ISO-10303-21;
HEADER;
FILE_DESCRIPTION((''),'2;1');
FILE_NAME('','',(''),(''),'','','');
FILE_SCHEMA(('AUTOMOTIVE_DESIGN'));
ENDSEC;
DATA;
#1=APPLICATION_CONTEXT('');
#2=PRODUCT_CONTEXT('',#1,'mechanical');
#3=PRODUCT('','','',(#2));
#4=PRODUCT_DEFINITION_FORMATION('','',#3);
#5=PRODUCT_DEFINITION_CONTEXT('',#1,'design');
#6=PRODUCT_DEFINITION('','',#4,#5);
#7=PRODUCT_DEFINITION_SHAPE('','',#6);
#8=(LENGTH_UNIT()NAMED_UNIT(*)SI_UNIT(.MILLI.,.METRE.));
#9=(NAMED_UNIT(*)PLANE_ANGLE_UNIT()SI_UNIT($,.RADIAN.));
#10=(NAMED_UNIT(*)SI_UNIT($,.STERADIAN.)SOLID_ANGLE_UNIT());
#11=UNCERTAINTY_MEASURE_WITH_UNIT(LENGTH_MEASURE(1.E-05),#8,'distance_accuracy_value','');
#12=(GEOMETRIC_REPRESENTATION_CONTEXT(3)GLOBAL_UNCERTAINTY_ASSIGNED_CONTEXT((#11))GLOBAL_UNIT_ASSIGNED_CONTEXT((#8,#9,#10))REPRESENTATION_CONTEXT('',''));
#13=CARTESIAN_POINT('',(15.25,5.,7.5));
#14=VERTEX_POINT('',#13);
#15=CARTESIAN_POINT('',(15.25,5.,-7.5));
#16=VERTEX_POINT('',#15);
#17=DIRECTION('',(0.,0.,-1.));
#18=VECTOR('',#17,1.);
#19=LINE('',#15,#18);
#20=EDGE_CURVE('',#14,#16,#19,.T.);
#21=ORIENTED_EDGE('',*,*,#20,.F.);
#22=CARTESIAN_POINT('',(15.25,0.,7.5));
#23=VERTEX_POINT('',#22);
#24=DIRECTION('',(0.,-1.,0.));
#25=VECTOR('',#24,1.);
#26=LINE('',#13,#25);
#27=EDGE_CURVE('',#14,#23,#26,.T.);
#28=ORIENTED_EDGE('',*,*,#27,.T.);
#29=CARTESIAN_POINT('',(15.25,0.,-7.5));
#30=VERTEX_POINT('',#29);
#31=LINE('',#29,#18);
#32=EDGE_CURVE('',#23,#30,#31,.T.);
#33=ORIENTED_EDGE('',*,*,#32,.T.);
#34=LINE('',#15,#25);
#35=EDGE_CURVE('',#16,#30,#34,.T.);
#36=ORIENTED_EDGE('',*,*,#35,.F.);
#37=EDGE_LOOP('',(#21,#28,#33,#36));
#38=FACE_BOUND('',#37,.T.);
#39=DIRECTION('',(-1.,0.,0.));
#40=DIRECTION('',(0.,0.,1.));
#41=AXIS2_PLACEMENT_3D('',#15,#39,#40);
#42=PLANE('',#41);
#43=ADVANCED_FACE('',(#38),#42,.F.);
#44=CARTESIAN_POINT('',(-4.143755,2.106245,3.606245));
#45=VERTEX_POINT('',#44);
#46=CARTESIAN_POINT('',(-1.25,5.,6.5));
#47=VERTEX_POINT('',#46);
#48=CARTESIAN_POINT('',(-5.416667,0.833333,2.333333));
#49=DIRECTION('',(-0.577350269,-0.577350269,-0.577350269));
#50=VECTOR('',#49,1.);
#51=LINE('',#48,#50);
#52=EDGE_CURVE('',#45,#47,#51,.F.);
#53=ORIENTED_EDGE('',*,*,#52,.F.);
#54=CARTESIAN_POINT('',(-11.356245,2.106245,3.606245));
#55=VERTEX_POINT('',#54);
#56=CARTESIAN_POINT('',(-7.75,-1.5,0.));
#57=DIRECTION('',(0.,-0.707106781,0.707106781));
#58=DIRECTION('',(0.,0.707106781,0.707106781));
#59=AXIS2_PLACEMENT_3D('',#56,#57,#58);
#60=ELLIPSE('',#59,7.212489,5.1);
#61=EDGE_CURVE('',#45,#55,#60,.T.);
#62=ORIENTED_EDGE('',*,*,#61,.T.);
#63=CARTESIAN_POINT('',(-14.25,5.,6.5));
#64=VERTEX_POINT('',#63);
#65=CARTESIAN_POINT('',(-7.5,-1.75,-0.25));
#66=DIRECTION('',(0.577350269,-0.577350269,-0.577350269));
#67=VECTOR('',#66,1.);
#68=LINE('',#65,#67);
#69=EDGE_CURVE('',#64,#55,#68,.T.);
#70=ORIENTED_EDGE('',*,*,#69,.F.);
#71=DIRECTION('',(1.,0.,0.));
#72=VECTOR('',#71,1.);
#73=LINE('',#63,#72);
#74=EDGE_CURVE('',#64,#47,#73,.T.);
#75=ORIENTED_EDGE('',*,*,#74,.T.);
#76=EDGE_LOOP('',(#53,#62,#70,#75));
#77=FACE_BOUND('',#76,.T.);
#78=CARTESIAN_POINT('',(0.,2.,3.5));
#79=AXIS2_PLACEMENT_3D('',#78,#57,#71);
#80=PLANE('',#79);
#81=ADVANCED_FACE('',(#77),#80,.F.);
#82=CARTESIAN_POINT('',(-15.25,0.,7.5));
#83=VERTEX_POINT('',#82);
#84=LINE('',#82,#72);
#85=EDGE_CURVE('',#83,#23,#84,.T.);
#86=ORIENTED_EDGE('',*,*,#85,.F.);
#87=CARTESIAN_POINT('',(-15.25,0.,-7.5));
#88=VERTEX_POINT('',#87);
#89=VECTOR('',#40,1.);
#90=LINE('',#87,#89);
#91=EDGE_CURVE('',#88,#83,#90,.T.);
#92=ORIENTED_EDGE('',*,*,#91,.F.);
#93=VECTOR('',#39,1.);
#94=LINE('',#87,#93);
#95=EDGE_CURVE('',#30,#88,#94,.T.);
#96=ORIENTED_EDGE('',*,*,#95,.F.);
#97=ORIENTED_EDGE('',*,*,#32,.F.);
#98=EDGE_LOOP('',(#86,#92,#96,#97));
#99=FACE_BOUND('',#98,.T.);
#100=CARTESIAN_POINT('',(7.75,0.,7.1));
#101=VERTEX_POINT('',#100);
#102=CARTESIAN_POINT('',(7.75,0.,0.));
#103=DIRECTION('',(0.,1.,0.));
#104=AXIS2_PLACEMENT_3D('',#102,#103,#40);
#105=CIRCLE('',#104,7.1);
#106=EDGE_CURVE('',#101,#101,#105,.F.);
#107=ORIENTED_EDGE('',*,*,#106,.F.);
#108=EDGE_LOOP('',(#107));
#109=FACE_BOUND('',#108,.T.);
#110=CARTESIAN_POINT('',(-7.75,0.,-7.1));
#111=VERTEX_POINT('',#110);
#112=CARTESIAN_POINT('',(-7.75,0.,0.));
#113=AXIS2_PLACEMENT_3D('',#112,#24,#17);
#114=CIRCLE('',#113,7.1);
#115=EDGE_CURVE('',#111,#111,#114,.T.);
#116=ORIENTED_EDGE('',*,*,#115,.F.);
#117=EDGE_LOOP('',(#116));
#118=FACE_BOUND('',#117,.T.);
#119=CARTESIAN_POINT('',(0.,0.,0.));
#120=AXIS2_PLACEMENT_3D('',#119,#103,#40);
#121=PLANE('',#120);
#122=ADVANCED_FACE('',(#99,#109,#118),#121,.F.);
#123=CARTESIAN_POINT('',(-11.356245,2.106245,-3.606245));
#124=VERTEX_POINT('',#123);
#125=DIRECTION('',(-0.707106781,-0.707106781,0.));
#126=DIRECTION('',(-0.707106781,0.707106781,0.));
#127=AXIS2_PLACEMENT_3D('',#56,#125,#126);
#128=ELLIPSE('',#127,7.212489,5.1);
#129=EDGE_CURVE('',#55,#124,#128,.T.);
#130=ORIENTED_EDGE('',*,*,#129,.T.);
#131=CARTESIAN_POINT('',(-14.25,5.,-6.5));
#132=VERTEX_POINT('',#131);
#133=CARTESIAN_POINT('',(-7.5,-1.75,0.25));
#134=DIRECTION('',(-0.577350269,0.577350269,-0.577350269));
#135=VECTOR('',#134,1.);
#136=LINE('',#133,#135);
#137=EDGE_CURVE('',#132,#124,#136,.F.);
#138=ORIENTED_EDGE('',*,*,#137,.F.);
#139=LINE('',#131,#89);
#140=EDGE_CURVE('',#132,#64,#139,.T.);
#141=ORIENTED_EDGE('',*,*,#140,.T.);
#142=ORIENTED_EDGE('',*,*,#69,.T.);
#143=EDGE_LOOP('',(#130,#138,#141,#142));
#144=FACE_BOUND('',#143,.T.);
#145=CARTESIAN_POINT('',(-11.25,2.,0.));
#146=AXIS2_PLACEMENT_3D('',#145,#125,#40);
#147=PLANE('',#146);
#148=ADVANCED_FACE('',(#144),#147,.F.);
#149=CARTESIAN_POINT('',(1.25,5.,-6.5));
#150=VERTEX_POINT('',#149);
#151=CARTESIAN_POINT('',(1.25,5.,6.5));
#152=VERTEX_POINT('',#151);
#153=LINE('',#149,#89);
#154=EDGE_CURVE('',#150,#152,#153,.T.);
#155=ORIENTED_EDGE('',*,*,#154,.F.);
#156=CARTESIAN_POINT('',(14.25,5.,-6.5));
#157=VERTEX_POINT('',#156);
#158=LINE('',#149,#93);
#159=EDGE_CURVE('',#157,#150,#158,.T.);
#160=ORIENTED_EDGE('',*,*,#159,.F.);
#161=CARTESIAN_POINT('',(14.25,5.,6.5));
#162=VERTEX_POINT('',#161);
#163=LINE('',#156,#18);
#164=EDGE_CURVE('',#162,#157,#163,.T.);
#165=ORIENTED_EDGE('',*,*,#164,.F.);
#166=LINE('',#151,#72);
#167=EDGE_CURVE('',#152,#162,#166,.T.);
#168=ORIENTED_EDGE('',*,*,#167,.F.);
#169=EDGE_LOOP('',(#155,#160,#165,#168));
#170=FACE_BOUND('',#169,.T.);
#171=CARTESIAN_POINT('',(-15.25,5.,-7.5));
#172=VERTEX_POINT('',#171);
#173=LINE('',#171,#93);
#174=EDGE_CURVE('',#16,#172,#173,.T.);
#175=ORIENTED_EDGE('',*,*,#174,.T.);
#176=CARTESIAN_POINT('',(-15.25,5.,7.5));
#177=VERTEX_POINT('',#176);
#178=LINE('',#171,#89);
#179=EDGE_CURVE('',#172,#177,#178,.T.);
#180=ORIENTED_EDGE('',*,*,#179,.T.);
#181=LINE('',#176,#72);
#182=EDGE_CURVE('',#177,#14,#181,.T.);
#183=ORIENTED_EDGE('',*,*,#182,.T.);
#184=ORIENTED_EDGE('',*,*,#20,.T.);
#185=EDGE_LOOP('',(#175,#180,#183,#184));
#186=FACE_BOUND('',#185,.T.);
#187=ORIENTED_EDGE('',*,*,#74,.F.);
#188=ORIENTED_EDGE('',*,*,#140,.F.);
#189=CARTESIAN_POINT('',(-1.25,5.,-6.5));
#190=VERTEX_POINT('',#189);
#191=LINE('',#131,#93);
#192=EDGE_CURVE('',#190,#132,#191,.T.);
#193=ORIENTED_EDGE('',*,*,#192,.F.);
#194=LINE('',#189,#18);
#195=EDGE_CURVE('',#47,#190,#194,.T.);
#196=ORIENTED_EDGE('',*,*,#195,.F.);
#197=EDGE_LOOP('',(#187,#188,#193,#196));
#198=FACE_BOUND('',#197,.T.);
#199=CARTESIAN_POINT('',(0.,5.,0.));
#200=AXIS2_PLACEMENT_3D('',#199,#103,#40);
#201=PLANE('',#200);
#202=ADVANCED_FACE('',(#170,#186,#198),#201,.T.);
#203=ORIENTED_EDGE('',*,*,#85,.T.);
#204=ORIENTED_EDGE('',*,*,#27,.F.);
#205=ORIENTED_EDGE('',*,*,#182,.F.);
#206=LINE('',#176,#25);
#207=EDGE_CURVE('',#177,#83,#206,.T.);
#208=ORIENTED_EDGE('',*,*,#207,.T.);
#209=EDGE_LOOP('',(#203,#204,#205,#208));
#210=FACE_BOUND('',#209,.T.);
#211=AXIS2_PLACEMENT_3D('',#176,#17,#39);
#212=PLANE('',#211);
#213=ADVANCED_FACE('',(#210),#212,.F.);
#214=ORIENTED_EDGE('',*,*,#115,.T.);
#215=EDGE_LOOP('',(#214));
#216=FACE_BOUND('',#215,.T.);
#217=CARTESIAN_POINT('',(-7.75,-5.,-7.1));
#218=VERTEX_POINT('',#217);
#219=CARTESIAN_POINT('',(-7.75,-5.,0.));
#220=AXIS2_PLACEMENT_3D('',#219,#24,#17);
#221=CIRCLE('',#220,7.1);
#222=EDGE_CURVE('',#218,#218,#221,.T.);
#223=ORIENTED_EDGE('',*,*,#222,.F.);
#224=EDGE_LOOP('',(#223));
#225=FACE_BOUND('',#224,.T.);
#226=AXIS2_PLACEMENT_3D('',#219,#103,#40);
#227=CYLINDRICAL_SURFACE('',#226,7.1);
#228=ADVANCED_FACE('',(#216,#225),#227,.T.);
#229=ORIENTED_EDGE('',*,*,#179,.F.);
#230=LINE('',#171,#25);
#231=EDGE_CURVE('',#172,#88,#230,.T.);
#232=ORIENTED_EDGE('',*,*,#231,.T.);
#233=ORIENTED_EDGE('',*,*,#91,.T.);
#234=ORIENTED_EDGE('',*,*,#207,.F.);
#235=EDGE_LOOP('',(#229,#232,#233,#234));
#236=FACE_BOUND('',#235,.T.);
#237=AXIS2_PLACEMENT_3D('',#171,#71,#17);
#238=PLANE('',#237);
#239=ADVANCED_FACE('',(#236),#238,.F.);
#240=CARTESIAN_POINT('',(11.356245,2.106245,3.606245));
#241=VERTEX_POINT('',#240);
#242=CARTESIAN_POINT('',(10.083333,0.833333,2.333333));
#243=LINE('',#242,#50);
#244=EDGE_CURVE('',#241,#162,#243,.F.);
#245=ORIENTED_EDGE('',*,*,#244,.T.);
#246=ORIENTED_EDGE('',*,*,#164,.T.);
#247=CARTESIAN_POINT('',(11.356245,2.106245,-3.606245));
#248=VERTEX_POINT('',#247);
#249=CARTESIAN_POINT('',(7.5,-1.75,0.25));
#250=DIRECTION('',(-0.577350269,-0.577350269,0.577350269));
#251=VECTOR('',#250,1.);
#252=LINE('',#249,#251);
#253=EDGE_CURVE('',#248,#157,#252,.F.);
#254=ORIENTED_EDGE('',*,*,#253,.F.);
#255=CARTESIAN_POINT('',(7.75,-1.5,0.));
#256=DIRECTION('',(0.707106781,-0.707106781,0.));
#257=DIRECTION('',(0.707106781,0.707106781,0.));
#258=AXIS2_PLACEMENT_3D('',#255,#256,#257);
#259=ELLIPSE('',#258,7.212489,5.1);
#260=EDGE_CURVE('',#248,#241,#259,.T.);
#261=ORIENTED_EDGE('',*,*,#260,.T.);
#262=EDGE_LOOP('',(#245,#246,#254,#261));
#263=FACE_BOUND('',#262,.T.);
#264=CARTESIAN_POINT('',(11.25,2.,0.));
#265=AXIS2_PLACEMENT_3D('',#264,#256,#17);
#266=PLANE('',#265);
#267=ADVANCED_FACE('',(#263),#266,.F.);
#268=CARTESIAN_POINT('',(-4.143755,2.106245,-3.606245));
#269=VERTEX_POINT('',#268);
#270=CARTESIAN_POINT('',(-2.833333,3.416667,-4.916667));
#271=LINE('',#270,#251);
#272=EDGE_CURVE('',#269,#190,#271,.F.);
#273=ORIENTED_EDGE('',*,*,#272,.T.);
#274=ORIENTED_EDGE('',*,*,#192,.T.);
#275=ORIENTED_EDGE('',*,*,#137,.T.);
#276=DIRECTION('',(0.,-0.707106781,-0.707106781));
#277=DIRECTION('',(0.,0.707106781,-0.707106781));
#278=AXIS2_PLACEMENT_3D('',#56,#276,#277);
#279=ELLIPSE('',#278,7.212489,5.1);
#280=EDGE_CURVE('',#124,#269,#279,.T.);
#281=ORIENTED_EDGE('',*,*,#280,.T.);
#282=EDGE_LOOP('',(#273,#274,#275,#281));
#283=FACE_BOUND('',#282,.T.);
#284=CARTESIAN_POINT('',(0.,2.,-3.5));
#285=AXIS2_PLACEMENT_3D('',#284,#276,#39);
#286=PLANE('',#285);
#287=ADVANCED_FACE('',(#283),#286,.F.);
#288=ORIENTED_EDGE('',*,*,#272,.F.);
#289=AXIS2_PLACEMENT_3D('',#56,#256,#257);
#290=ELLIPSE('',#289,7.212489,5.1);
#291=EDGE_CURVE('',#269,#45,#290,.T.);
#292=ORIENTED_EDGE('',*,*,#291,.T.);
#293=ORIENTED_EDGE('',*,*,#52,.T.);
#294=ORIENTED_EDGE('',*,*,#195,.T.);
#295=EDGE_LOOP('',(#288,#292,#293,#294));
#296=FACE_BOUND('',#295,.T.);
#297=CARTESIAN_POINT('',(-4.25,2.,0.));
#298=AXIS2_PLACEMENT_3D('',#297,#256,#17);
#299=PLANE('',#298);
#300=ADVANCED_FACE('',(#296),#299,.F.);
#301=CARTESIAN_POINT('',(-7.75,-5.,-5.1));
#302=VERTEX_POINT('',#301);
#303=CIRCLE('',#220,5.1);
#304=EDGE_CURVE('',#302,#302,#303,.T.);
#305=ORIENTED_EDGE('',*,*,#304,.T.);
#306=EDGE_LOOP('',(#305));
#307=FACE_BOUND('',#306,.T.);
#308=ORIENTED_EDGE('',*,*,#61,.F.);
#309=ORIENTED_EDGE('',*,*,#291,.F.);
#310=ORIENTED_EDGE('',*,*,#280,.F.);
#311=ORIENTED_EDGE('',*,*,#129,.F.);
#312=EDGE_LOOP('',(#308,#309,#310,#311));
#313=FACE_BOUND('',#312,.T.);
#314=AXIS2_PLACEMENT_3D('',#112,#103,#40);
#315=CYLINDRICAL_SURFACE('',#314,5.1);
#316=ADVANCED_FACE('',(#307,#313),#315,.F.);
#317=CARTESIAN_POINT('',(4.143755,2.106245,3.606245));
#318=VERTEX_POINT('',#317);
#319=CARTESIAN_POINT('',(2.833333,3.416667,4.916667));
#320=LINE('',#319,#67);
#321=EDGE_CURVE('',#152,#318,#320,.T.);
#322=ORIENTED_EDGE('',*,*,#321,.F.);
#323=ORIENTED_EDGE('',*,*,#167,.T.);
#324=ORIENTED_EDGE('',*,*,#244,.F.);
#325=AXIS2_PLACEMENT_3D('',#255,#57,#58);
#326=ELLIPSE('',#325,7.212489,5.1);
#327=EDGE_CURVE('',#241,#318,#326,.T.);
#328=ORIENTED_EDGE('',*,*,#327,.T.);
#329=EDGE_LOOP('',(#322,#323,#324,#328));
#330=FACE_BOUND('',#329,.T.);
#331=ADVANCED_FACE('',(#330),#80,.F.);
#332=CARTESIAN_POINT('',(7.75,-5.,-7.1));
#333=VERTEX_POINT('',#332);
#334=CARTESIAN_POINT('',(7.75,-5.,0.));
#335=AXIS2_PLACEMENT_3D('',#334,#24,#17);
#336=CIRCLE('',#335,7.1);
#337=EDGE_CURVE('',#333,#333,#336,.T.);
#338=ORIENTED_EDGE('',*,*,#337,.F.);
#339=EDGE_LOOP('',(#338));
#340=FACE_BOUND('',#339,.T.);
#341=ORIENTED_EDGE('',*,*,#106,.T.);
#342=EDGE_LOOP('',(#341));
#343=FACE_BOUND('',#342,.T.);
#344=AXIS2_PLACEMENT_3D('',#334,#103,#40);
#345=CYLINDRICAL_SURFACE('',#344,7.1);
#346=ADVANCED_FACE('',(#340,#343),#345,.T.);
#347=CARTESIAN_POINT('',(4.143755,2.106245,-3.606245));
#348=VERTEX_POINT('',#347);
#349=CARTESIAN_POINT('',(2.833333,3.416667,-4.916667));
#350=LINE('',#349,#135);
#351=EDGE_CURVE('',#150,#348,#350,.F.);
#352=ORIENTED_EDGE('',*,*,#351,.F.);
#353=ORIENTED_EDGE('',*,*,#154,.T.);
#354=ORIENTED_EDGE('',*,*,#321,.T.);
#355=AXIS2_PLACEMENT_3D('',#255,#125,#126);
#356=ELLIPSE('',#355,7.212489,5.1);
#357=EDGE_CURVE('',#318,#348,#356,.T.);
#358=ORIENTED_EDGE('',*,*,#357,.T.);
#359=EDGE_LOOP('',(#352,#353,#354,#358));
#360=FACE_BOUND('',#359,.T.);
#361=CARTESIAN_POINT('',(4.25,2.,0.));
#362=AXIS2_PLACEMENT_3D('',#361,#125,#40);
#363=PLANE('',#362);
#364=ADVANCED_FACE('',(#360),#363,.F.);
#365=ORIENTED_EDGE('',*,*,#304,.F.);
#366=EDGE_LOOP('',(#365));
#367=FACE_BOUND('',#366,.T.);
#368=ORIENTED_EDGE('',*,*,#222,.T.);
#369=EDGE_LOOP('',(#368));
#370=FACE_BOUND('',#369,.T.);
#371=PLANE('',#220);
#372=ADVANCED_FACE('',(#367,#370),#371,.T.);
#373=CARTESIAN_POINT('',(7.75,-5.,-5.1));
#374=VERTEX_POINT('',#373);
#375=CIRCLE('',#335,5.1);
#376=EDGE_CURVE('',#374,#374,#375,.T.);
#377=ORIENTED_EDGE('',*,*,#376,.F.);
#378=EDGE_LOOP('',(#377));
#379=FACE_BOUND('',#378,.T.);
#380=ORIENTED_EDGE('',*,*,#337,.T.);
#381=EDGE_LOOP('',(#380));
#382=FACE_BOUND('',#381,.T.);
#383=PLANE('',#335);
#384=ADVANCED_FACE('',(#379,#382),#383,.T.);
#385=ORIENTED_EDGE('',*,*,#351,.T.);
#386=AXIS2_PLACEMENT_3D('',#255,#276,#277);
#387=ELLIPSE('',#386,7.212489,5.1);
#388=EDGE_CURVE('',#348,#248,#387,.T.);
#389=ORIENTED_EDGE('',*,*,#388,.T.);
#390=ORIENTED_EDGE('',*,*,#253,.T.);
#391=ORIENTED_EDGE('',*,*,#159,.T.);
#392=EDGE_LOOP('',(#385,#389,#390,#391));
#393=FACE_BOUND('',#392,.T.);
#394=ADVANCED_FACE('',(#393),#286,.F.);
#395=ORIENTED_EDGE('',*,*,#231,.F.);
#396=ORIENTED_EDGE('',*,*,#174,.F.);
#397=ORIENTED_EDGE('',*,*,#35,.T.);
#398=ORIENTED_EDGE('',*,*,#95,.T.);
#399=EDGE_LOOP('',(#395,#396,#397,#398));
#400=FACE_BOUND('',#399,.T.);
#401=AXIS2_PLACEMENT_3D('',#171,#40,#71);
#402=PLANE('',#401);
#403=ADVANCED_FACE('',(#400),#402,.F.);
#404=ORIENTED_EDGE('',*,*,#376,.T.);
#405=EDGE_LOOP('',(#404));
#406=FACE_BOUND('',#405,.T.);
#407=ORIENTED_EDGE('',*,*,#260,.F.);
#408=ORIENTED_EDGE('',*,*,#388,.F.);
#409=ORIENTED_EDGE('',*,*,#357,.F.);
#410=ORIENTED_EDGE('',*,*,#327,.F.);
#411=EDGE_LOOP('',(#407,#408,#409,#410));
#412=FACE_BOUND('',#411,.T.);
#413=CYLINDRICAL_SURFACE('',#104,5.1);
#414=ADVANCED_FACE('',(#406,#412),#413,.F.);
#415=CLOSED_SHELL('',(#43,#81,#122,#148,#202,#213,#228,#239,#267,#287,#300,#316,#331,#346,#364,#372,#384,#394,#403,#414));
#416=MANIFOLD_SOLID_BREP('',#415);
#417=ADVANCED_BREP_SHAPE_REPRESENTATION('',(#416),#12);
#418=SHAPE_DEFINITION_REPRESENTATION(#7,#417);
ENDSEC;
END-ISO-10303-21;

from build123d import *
from build123d.topology import SkipClean

# Parameters (mm, degrees)
SKETCH1_W               = 30.5
SKETCH1_H               = 15
BOSS_EXTRUDE1_DEPTH     = 5
SKETCH2_W               = 13
SKETCH2_H               = 13
CUT_EXTRUDE1_DEPTH      = 3
CHAMFER1_SIZE           = 3
CUT_EXTRUDE3_DEPTH      = 18.257244855
CUT_EXTRUDE3_DEPTH_BACK = 18.257244855
SKETCH4_R               = 5.1
SKETCH5_R               = 7.1
SKETCH5_R_2             = 5.1
BOSS_EXTRUDE3_DEPTH     = 5


with BuildPart() as part:
    # Sketch1 → Boss-Extrude1 (new body)
    with BuildSketch(Plane(origin=(0, 0, 0), x_dir=(1, 0, 0), z_dir=(0, 1, 0))):
        Rectangle(SKETCH1_W, SKETCH1_H)
    extrude(amount=BOSS_EXTRUDE1_DEPTH)

    # Sketch2 → Cut-Extrude1 (cut)
    with BuildSketch(Plane(origin=(0, 5, 0), x_dir=(1, 0, 0), z_dir=(0, 1, 0))):
        with Locations((-7.75, 0)):
            Rectangle(SKETCH2_W, SKETCH2_H)
        with Locations((7.75, 0)):
            Rectangle(SKETCH2_W, SKETCH2_H)
    extrude(amount=-CUT_EXTRUDE1_DEPTH, mode=Mode.SUBTRACT)

    # Chamfer1
    chamfer1_edges = [part.edges().sort_by_distance(p)[0] for p in [
        (-7.75, 2, -6.5),
        (-1.25, 2, 0),
        (-7.75, 2, 6.5),
        (-14.25, 2, 0),
        (7.75, 2, -6.5),
        (14.25, 2, 0),
        (7.75, 2, 6.5),
        (1.25, 2, 0),
    ]]
    chamfer(chamfer1_edges, length=CHAMFER1_SIZE - 0.0001)  # a hair under: the kernel refuses the full size

    # Sketch4 → Cut-Extrude3 (cut, two sides: drawn at the far end of the back side and taken through both)
    with BuildSketch(Plane(origin=(0, 2, 0), x_dir=(1, 0, 0), z_dir=(0, 1, 0)).offset(-CUT_EXTRUDE3_DEPTH_BACK)):
        with Locations(Location((-7.75, 0, 0), (0, 0, 270))):
            Circle(SKETCH4_R)
        with Locations(Location((7.75, 0, 0), (0, 0, 270))):
            Circle(SKETCH4_R)
    extrude(amount=CUT_EXTRUDE3_DEPTH + CUT_EXTRUDE3_DEPTH_BACK, mode=Mode.SUBTRACT)

    # Sketch5 → Boss-Extrude3 (add)
    # profile 1 of 2: a face of its own
    with SkipClean():  # the faces are left unmerged after this step: merging them gives an invalid solid
        with BuildSketch(Plane.XZ):
            with Locations(Location((-7.75, 0, 0), (0, 0, 270))):
                Circle(SKETCH5_R)
            with Locations(Location((-7.75, 0, 0), (0, 0, 45))):
                Circle(SKETCH5_R_2, mode=Mode.SUBTRACT)
        # profile 2 of 2: a face of its own
        with BuildSketch(Plane.XZ):
            with Locations(Location((7.75, 0, 0), (0, 0, 90))):
                Circle(SKETCH5_R)
            with Locations(Location((7.75, 0, 0), (0, 0, 135))):
                Circle(SKETCH5_R_2, mode=Mode.SUBTRACT)
        extrude(amount=BOSS_EXTRUDE3_DEPTH)


solid = part.part
